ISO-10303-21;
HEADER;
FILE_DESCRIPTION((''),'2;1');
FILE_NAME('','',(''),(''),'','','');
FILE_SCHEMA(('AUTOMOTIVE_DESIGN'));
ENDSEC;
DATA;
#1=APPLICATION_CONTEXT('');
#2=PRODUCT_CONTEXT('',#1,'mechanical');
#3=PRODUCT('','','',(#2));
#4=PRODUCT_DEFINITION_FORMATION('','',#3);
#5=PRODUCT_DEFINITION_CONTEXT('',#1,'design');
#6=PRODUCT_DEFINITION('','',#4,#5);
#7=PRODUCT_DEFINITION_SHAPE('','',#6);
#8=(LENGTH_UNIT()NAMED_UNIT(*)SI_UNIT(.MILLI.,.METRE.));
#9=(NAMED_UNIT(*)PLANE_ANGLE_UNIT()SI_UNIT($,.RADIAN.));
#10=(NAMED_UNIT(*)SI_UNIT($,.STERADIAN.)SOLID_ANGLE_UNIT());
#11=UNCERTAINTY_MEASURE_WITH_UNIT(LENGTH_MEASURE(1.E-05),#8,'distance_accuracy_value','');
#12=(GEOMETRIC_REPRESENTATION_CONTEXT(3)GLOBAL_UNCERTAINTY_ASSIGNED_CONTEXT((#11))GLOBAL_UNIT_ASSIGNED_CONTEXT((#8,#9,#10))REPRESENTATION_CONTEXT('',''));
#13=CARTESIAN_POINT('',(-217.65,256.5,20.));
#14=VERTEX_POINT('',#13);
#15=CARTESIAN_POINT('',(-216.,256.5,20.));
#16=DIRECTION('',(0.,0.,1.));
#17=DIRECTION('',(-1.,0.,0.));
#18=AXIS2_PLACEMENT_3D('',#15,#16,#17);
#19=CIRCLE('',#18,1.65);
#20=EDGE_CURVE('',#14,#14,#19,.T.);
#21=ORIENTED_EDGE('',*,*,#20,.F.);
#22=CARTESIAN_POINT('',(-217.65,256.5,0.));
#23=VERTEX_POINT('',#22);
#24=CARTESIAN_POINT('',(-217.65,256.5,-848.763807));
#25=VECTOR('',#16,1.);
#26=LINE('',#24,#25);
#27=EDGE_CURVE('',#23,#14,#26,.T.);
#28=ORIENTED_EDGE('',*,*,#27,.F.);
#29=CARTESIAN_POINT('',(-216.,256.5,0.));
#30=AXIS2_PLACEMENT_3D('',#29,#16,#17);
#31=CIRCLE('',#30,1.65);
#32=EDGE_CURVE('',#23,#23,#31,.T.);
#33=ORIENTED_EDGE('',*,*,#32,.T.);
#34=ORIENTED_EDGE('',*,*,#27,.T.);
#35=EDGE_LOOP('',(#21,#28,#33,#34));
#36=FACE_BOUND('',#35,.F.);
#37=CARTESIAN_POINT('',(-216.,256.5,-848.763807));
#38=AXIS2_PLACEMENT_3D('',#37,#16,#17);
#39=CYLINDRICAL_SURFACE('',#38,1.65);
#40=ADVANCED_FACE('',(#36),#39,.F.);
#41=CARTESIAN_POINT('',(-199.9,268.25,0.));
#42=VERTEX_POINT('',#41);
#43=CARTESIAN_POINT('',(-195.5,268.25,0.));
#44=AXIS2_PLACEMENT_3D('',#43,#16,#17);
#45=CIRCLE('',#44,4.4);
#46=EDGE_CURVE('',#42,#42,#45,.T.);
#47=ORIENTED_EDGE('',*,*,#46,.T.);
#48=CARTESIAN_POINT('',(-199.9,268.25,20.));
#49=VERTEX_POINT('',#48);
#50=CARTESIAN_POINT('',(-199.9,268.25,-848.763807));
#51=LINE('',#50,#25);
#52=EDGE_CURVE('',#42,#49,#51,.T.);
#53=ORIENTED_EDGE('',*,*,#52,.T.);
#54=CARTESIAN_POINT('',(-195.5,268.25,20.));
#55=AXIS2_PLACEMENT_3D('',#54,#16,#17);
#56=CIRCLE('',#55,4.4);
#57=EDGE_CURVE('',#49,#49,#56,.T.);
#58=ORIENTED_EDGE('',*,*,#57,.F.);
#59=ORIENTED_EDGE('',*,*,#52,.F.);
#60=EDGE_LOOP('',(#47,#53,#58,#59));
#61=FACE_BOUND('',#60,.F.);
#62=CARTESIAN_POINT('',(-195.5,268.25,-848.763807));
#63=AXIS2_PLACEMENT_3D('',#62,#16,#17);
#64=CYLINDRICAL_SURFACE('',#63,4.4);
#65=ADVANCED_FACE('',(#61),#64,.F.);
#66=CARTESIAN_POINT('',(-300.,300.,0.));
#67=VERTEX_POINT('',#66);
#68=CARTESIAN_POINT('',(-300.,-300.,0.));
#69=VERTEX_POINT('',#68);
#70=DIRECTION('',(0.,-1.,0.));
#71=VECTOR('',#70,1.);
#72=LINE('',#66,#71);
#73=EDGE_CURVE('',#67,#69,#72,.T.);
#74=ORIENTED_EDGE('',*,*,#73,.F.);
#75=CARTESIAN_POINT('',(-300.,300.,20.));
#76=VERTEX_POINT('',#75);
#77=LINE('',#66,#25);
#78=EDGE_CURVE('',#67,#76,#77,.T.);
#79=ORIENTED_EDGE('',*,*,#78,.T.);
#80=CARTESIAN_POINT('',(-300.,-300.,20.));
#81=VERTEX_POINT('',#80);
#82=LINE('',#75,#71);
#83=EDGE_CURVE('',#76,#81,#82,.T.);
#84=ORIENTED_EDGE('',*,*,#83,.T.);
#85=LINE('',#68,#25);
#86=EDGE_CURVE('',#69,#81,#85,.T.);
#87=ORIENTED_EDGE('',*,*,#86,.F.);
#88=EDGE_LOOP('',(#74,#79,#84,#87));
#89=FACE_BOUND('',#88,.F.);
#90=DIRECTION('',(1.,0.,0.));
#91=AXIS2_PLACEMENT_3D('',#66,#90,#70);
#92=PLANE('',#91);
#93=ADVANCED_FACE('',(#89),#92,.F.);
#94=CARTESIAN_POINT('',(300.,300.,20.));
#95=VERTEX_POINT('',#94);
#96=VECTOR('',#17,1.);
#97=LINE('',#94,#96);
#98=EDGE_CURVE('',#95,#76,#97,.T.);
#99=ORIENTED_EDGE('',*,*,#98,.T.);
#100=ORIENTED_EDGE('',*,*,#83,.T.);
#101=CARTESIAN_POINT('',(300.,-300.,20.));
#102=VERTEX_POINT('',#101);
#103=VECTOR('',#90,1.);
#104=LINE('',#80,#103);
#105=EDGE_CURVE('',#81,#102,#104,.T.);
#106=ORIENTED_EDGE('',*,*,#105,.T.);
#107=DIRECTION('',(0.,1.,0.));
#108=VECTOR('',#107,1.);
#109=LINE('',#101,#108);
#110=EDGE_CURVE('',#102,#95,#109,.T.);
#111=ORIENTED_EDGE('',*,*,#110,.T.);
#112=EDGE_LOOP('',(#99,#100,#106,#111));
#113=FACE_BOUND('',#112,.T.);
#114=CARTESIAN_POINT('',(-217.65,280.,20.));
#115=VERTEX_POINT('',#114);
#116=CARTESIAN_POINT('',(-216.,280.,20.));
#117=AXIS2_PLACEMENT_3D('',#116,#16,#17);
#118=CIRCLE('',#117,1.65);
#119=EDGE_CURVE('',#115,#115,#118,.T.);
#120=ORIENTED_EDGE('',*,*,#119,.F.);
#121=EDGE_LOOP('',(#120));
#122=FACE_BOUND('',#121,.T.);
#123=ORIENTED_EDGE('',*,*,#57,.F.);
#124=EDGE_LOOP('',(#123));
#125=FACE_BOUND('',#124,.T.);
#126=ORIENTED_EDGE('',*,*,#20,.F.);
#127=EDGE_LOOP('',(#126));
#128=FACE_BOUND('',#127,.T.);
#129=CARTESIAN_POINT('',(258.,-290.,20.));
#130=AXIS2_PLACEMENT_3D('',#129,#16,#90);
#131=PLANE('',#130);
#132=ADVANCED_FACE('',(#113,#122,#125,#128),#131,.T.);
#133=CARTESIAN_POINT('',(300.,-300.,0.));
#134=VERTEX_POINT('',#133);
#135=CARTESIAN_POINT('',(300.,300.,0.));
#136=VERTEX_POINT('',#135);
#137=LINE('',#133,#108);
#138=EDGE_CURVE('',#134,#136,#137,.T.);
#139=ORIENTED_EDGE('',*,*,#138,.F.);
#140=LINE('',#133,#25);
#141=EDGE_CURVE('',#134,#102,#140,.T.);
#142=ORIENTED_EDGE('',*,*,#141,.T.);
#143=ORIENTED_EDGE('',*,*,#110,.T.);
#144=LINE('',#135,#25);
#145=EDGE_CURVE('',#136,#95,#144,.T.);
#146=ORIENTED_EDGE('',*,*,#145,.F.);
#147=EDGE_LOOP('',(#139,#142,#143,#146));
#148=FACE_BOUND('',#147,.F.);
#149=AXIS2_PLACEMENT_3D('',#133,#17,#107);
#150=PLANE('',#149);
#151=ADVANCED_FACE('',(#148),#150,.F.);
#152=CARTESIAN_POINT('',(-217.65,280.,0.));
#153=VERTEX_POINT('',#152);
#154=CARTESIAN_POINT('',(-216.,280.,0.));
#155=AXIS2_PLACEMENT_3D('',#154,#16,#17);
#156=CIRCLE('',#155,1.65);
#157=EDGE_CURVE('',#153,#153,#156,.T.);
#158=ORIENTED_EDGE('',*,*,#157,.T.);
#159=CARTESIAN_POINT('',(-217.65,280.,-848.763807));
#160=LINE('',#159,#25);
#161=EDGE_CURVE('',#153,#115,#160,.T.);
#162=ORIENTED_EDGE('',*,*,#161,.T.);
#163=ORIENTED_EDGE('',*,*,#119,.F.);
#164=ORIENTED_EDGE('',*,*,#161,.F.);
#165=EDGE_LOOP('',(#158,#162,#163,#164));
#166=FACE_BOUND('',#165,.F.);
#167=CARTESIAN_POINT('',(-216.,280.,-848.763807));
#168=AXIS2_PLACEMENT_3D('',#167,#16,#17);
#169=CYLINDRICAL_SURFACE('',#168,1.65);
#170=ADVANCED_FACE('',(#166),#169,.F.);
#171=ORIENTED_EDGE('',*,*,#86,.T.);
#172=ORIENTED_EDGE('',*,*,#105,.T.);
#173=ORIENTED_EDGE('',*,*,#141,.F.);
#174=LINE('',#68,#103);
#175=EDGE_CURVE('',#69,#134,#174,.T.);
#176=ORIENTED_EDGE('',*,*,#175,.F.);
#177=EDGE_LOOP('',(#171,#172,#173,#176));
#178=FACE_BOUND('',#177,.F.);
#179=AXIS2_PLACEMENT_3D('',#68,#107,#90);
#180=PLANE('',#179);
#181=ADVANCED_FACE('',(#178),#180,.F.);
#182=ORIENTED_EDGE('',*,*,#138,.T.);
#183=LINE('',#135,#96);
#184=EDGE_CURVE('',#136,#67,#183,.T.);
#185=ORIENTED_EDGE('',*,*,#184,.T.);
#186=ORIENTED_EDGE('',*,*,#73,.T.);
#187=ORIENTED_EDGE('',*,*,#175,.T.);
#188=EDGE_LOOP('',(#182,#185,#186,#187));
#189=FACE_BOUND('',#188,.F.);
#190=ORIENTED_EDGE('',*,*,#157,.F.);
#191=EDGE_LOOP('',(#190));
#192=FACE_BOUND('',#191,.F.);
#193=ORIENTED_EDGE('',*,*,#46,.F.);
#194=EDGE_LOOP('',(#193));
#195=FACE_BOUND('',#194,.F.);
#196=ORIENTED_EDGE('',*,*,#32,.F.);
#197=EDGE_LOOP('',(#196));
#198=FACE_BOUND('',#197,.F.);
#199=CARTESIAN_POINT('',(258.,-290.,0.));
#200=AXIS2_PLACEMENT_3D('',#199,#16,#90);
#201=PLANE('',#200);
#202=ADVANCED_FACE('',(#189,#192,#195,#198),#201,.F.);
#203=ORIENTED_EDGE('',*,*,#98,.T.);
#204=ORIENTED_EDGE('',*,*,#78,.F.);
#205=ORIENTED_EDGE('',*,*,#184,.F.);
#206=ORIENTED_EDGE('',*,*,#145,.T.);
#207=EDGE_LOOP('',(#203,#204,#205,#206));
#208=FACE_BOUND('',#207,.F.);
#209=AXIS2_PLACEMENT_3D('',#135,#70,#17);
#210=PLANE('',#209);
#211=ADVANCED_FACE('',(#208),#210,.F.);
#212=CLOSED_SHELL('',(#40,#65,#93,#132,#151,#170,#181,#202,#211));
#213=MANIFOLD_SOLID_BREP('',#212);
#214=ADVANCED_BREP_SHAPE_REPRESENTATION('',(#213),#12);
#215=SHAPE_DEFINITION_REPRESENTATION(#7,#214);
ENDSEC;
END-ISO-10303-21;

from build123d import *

# Parameters (mm, degrees)
F0_W     = 84
F0_H     = 20
F0_W_2   = 423
F0_W_3   = 9
F0_H_2   = 11.75
F1_DEPTH = 20
F2_D     = 3.3
F3_D     = 8.8


with BuildPart() as f1:
    # F0 (on Top) → F1 (new body)
    with BuildSketch(Plane.XY):
        with Locations((258, -290)):
            Rectangle(F0_W, F0_H)
        with Locations((4.5, -290)):
            Rectangle(F0_W_2, F0_H)
        Polygon((216, -280), (300, -280), (300, 280), (216, 280), (216, 268.25), (216, 256.5), align=None)
        with Locations((-211.5, -290)):
            Rectangle(F0_W_3, F0_H)
        with BuildLine():
            Line((-207, -280), (216, -280))
            Line((216, -280), (216, 256.5))
            Line((216, 256.5), (216, 268.25))
            Line((216, 268.25), (-184.5, 268.25))
            ThreePointArc((-184.5, 268.25), (-195.5, 257.25), (-206.5, 268.25))
            Line((-206.5, 268.25), (-207, 268.25))
            Line((-207, 268.25), (-207, -280))
        make_face()
        with Locations((258, 290)):
            Rectangle(F0_W, F0_H)
        with Locations((-258, -290)):
            Rectangle(F0_W, F0_H)
        Polygon((-216, -280), (-207, -280), (-207, 268.25), (-216, 268.25), (-216, 256.5), align=None)
        Polygon((-207, 280), (216, 280), (216, 300), (-216, 300), (-216, 280), align=None)
        with BuildLine():
            Line((216, 268.25), (216, 280))
            Line((216, 280), (-207, 280))
            Line((-207, 280), (-207, 268.25))
            Line((-207, 268.25), (-206.5, 268.25))
            ThreePointArc((-206.5, 268.25), (-195.5, 279.25), (-184.5, 268.25))
            Line((-184.5, 268.25), (216, 268.25))
        make_face()
        Polygon((-300, -280), (-216, -280), (-216, 256.5), (-216, 268.25), (-216, 280), (-300, 280), align=None)
        with Locations((-211.5, 274.125)):
            Rectangle(F0_W_3, F0_H_2)
        with BuildLine():
            ThreePointArc((-184.5, 268.25), (-195.5, 279.25), (-206.5, 268.25))
            Line((-206.5, 268.25), (-195.5, 268.25))
            Line((-195.5, 268.25), (-184.5, 268.25))
        make_face()
        with BuildLine():
            Line((-195.5, 268.25), (-206.5, 268.25))
            ThreePointArc((-206.5, 268.25), (-195.5, 257.25), (-184.5, 268.25))
            Line((-184.5, 268.25), (-195.5, 268.25))
        make_face()
        with Locations((-258, 290)):
            Rectangle(F0_W, F0_H)
    extrude(amount=F1_DEPTH)

    # F2 (through all)
    with Locations(Plane(origin=(0, 0, 0), x_dir=(1, 0, 0), z_dir=(0, 0, -1))):
        with Locations((-216, -280), (-216, -256.5)):
            Hole(F2_D / 2)

    # F3 (through all)
    with Locations(Plane(origin=(0, 0, 0), x_dir=(1, 0, 0), z_dir=(0, 0, -1))):
        with Locations((-195.5, -268.25)):
            Hole(F3_D / 2)


solid = f1.part
